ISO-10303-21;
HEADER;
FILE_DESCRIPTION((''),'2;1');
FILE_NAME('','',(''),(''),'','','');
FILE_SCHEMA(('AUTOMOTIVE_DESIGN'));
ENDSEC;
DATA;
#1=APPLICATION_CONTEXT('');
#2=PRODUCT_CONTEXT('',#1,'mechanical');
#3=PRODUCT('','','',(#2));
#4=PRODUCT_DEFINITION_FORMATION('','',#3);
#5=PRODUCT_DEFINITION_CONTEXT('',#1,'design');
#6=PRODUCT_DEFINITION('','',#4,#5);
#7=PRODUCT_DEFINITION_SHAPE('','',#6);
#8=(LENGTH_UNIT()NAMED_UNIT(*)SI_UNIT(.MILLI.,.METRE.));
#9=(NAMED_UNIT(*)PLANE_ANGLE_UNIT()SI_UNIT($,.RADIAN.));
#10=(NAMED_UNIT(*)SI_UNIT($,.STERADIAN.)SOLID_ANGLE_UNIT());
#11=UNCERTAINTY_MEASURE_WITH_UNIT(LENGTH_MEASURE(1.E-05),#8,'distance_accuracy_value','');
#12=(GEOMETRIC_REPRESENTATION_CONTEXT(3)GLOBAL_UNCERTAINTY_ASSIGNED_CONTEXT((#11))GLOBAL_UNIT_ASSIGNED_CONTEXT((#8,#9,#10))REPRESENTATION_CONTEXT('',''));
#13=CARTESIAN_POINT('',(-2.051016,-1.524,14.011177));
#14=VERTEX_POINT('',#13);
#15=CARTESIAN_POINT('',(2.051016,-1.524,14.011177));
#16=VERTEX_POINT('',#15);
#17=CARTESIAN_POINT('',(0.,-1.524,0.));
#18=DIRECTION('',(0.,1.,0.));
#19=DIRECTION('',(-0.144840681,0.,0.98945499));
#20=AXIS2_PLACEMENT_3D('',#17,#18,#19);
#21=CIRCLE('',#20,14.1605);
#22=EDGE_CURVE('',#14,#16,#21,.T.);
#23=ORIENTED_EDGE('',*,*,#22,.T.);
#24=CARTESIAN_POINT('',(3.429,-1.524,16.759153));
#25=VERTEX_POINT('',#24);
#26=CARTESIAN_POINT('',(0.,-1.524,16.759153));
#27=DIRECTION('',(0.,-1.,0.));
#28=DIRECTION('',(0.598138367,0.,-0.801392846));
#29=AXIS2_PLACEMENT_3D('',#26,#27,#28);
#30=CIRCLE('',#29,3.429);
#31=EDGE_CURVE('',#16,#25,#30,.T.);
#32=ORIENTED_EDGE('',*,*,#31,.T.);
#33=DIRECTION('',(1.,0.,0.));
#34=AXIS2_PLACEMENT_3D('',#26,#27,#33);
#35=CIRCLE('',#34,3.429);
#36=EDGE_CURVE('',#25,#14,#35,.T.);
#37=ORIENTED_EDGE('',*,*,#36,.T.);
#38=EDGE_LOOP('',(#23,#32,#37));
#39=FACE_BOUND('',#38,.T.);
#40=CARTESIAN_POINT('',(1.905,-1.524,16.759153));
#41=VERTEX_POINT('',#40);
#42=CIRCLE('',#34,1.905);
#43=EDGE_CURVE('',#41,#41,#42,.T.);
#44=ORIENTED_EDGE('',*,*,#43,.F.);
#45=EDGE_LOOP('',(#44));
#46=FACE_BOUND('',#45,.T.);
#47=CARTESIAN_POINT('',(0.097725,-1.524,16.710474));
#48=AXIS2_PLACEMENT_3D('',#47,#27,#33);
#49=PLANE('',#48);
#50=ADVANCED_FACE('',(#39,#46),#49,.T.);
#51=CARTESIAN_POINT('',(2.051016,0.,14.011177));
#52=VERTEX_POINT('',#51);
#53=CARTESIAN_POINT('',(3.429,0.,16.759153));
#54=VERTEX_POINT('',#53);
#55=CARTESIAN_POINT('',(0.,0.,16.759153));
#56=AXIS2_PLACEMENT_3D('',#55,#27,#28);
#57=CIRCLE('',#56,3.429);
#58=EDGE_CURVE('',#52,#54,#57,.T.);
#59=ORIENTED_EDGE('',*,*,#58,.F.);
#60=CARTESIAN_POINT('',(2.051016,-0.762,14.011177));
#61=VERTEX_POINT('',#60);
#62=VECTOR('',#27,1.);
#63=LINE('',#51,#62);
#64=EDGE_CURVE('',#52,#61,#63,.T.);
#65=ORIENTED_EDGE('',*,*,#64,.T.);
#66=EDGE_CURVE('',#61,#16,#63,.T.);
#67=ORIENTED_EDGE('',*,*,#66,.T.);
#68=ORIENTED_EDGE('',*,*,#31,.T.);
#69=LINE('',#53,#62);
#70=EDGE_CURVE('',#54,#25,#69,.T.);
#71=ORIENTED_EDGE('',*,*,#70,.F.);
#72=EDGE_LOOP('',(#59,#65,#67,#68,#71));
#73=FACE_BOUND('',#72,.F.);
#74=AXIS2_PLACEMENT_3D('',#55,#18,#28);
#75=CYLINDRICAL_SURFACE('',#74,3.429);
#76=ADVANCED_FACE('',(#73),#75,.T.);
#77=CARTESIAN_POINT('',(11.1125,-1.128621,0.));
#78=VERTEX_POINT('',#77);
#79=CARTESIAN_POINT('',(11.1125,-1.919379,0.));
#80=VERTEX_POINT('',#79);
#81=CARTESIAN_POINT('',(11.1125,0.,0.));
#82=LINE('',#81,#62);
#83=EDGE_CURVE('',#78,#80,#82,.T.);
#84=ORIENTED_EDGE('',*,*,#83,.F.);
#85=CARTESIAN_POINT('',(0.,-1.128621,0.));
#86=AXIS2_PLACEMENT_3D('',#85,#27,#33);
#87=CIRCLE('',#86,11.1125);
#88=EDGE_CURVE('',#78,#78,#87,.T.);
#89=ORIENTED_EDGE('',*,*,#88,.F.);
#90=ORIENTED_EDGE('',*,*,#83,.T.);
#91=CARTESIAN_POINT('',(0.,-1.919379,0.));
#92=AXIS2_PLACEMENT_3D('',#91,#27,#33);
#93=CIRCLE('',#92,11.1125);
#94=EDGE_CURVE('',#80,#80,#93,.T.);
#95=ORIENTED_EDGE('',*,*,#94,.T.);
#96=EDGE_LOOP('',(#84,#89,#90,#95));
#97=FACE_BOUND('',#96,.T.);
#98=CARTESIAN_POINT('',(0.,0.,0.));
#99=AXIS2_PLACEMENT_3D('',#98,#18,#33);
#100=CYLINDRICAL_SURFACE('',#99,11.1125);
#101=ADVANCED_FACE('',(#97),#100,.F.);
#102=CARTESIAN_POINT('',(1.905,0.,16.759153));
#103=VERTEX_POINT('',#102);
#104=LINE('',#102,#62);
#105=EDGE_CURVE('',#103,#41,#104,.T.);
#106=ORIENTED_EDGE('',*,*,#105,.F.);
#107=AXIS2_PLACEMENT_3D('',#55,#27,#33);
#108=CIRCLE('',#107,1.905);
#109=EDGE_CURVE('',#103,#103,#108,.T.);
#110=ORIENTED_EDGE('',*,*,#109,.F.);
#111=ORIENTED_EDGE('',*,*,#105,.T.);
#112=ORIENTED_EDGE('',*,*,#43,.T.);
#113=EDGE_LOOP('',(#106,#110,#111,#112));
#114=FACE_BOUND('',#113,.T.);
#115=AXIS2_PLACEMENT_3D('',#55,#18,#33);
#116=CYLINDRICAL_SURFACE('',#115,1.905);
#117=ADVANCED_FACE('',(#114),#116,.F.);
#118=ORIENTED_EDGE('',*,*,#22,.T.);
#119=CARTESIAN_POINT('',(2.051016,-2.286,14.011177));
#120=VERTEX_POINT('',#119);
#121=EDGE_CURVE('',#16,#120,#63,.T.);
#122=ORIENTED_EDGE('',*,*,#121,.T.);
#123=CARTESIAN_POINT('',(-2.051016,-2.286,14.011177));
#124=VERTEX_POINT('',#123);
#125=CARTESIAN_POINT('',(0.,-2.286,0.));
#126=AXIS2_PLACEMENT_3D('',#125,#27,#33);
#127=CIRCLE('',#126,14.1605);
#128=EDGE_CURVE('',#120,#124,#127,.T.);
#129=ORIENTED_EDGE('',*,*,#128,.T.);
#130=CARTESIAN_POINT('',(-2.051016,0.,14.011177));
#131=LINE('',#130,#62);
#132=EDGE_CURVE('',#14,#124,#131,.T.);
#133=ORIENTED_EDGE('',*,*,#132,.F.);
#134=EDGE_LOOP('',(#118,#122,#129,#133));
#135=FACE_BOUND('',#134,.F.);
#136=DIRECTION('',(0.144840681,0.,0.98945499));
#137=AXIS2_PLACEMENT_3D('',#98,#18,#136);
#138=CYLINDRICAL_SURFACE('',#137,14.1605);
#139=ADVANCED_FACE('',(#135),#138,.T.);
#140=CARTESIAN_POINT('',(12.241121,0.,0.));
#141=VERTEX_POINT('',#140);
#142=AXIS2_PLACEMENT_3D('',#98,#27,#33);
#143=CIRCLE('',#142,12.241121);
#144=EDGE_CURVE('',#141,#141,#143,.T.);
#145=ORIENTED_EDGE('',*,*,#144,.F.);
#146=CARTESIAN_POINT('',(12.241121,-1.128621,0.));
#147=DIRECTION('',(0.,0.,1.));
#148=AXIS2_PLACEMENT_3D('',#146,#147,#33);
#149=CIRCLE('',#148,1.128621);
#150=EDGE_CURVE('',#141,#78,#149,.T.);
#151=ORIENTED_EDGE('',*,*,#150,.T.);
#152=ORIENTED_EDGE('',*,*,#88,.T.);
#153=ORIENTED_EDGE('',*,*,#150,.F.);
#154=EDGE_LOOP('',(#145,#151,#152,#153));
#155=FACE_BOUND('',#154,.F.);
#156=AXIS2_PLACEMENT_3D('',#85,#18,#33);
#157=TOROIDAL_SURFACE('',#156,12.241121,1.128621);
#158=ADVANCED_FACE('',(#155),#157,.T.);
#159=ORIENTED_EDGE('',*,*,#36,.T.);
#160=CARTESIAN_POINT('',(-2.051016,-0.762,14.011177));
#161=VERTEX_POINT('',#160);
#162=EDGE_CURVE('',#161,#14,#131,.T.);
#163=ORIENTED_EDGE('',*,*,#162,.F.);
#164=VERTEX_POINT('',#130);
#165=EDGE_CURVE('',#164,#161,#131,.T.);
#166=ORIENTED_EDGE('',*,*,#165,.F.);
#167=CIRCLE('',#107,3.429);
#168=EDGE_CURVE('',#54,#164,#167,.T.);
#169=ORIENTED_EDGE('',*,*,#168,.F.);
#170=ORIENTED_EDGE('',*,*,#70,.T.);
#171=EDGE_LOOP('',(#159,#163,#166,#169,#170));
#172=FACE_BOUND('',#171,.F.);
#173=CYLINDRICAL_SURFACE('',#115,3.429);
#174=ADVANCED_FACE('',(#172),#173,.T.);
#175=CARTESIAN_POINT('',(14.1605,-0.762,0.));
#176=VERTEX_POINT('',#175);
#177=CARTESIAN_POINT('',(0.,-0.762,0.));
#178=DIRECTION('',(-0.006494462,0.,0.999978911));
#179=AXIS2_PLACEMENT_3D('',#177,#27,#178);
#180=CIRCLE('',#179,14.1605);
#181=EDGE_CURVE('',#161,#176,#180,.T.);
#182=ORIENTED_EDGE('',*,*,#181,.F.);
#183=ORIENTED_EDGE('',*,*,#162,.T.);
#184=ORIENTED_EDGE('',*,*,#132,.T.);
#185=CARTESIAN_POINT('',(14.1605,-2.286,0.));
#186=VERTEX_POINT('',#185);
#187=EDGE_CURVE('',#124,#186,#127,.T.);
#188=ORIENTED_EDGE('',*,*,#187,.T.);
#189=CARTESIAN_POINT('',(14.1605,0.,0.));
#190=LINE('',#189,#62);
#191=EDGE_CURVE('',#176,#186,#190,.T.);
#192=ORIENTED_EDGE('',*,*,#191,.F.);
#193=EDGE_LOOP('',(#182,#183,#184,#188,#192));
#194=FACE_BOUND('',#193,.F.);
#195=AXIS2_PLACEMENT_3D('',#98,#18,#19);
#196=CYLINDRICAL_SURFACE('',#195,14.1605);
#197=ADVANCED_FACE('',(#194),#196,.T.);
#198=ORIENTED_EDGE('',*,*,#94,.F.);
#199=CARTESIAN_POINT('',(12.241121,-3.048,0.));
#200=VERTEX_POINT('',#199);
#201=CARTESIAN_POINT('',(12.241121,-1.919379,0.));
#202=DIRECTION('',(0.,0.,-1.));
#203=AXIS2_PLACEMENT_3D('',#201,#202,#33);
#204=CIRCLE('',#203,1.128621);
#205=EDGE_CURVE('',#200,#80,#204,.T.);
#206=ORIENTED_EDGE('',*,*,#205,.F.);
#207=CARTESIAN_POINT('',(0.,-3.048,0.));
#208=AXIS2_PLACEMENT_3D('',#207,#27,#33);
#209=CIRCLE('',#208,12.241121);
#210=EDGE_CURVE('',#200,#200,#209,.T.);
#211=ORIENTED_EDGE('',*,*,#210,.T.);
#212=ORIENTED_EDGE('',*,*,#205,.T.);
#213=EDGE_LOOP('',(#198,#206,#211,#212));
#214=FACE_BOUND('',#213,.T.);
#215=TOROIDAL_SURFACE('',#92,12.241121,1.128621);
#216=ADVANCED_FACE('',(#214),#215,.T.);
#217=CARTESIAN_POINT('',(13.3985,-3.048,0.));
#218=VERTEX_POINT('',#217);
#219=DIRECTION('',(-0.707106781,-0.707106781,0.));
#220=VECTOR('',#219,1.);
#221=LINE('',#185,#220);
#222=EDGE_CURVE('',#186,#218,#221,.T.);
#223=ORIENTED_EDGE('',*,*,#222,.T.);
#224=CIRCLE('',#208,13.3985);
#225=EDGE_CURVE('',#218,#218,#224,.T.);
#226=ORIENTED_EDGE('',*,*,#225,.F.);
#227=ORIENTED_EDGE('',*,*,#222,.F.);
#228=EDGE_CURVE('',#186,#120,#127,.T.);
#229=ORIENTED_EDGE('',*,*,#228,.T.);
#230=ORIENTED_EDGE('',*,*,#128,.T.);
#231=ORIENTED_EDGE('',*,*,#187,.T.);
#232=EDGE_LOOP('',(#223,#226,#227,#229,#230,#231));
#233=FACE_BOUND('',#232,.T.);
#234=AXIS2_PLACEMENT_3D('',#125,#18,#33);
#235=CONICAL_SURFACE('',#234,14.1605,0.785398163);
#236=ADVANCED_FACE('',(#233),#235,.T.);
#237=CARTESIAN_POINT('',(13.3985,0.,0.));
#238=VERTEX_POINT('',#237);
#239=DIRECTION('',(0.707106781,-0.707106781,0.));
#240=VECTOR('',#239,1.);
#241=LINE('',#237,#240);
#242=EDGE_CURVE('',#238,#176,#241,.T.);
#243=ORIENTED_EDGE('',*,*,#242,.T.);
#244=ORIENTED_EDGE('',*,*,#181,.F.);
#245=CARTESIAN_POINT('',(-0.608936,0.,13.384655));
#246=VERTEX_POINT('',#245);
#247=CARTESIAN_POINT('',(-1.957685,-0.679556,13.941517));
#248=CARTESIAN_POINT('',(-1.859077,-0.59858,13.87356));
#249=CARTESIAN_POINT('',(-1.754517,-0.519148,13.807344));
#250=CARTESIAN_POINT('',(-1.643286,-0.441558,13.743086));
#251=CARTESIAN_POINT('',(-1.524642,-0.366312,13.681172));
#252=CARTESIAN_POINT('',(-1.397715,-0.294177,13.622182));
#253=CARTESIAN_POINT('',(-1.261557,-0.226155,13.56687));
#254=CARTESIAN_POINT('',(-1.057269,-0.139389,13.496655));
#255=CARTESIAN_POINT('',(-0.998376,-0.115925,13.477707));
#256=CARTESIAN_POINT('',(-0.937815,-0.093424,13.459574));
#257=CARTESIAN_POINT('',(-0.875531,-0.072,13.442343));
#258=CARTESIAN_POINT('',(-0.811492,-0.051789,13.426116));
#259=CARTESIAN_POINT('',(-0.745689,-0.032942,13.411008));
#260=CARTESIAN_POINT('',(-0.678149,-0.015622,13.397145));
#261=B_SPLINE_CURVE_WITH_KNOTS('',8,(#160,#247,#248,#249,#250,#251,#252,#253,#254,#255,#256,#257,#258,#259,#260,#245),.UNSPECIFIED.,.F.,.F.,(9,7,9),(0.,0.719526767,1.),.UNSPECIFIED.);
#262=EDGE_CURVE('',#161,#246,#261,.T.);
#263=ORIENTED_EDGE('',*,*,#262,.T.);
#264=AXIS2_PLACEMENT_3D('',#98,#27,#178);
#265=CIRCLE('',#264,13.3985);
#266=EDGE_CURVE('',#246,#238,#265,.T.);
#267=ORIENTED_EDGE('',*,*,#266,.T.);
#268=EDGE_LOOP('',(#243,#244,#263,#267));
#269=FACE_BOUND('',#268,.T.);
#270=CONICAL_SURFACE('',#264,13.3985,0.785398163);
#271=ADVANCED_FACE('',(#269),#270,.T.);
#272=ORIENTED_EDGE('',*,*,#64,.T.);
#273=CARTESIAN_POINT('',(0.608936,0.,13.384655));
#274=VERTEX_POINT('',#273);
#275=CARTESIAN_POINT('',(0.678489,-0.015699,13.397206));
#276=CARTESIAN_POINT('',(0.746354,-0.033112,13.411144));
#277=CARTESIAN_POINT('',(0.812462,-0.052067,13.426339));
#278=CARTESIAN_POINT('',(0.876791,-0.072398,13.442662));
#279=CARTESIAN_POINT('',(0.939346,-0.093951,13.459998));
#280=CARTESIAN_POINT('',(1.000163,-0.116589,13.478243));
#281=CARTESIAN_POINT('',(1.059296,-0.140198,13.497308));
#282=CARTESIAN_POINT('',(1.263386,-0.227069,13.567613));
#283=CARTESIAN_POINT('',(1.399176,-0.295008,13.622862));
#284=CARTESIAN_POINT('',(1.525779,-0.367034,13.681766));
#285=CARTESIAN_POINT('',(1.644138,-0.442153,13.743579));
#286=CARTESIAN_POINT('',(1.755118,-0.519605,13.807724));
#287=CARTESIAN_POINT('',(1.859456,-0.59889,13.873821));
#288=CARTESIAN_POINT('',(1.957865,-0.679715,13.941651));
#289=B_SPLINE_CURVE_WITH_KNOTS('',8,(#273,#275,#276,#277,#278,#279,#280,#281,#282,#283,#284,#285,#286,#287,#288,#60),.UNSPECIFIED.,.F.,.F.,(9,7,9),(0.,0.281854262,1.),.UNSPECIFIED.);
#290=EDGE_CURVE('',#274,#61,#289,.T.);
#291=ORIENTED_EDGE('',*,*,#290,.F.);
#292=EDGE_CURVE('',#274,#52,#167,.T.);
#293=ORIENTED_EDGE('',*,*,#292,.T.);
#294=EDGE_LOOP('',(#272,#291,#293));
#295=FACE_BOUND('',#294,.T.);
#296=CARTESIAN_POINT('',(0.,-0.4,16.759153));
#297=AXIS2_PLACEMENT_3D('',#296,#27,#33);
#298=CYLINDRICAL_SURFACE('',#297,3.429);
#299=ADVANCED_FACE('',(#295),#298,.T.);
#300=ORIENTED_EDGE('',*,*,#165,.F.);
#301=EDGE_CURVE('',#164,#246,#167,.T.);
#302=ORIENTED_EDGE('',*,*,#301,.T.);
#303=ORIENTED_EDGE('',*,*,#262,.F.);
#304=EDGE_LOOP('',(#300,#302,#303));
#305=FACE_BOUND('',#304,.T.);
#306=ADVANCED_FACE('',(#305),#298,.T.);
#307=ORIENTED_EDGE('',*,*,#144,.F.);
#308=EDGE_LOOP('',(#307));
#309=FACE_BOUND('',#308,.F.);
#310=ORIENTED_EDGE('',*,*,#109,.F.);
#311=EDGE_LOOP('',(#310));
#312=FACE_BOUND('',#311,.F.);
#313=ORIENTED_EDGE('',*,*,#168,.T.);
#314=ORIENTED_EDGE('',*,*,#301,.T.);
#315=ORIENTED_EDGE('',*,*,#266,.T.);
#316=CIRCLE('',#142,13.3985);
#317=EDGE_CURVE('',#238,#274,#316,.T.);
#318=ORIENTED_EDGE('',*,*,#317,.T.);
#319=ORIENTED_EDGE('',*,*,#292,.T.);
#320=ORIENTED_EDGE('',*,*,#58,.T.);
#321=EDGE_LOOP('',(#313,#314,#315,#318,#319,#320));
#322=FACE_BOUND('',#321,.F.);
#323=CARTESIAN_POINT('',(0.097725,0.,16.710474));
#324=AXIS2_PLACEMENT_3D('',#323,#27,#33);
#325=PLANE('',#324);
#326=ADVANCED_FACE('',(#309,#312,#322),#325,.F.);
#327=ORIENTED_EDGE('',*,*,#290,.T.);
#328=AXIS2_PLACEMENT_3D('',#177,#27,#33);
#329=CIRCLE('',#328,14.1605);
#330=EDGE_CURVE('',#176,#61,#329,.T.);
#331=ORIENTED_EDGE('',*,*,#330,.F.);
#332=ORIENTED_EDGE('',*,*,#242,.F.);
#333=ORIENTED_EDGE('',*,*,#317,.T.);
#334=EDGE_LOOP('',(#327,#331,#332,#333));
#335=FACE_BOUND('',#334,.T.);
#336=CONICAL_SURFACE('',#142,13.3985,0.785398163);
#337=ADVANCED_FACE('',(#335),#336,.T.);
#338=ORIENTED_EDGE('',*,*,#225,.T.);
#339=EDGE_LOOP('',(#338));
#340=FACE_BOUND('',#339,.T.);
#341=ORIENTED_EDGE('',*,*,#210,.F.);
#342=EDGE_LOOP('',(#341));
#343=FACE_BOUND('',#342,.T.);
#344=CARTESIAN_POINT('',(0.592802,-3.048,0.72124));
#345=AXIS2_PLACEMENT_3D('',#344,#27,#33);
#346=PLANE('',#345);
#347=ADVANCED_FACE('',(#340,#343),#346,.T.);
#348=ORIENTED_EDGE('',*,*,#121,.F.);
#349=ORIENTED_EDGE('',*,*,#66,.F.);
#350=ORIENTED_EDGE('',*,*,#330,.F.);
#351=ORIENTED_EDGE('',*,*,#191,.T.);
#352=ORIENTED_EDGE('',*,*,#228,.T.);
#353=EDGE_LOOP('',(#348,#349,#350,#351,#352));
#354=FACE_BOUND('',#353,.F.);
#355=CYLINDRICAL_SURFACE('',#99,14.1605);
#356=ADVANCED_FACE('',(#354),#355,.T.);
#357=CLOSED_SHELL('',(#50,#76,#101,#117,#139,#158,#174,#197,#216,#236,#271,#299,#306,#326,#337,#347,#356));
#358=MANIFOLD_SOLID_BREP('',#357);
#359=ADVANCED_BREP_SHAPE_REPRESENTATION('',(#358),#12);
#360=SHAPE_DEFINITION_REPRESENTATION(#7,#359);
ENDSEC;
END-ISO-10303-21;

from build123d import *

# Parameters (mm, degrees)
F0_R         = 11.1125
F1_DEPTH     = 3.048
F0_R_2       = 1.905
F2_DEPTH     = 1.524
F3_R         = 1.1286206983
F4_T6_ANGLE  = 269.6278921261
F4_S7_R      = 3.429
F4_T8_DEPTH  = 22
F4_T12_ANGLE = 89.6035333551
F4_S13_R     = 3.429
F4_T14_DEPTH = 11


# Not quite as in the source:
# - a fillet or chamfer that OpenCascade refuses, or shapes differently, is made with other operations: its cross-section is extruded or revolved along the edge and cut away or added


with BuildPart() as f1:
    # F0 (on Front) → F1 (new body)
    with BuildSketch(Plane.XZ):
        with BuildLine():
            ThreePointArc((-2.05101646, 14.0111773856), (-9.2594908518, -10.713617009), (14.1605, 0))
            ThreePointArc((14.1605, 0), (10.713617009, 9.2594908518), (2.05101646, 14.0111773856))
            ThreePointArc((2.05101646, 14.0111773856), (0, 13.3301534555), (-2.05101646, 14.0111773856))
        make_face()
        Circle(F0_R, mode=Mode.SUBTRACT)
        with BuildLine():
            ThreePointArc((-2.05101646, 14.0111773856), (0, 13.3301534555), (2.05101646, 14.0111773856))
            ThreePointArc((2.05101646, 14.0111773856), (0, 14.1605), (-2.05101646, 14.0111773856))
        make_face()
    extrude(amount=F1_DEPTH)

    # F0 (on Front) → F2 (join)
    with BuildSketch(Plane.XZ):
        with BuildLine():
            ThreePointArc((-2.05101646, 14.0111773856), (0, 14.1605), (2.05101646, 14.0111773856))
            ThreePointArc((2.05101646, 14.0111773856), (3.065206065, 15.2220936716), (3.429, 16.7591534555))
            ThreePointArc((3.429, 16.7591534555), (-1.5370597839, 19.8243595205), (-2.05101646, 14.0111773856))
        make_face()
        with Locations((0, 16.7591534555)):
            Circle(F0_R_2, mode=Mode.SUBTRACT)
    extrude(amount=F2_DEPTH)

    # F3
    f3_edges = [f1.edges().sort_by_distance(p)[0] for p in [
        (11.1125, -1.524, 0),
        (-11.1125, 0, 0),
        (-11.1125, -3.048, 0),
    ]]
    fillet(f3_edges, radius=F3_R)

    # F4: chamfer of 0.762 on 2 edges, made by hand

    # F4_s1 → F4_t2 (revolve, cut)
    with BuildSketch(Plane.XY):
        Polygon((14.1605, -2.286), (13.3985, -3.048), (14.1605, -3.048), align=None)
    revolve(axis=Axis((0, -3.048, 0), (0, -1, 0)), mode=Mode.SUBTRACT)


with BuildPart() as f4_tool4:
    # F4_s5 → F4_t6 (revolve)
    with BuildSketch(Plane(origin=(0, 0, 0), x_dir=(0, 1, 0), z_dir=(0.9999789108, 0, 0.0064944619))):
        Polygon((0, 13.3985), (-0.762, 14.1605), (0, 14.1605), align=None)
    revolve(axis=Axis((0, 0, 0), (0, -1, 0)), revolution_arc=F4_T6_ANGLE)

    # F4_s7 → F4_t8 (cut, symmetric)
    with BuildSketch(Plane.XZ.offset(0.4)):
        with Locations((0, 16.7591534555)):
            Circle(F4_S7_R)
    extrude(amount=F4_T8_DEPTH, both=True, mode=Mode.SUBTRACT)


with BuildPart() as f1_1:
    add(f1.part)

    # F4_t3: cut F4_tool4
    add(f4_tool4.part, mode=Mode.SUBTRACT)


with BuildPart() as f4_tool10:
    # F4_s11 → F4_t12 (revolve)
    with BuildSketch(Plane.XY):
        Polygon((13.3985, 0), (14.1605, -0.762), (14.1605, 0), align=None)
    revolve(axis=Axis((0, 0, 0), (0, -1, 0)), revolution_arc=F4_T12_ANGLE)

    # F4_s13 → F4_t14 (cut, symmetric)
    with BuildSketch(Plane.XZ.offset(0.4)):
        with Locations((0, 16.7591534555)):
            Circle(F4_S13_R)
    extrude(amount=F4_T14_DEPTH, both=True, mode=Mode.SUBTRACT)


with BuildPart() as f1_2:
    add(f1_1.part)

    # F4_t9: cut F4_tool10
    add(f4_tool10.part, mode=Mode.SUBTRACT)


solid = f1_2.part
